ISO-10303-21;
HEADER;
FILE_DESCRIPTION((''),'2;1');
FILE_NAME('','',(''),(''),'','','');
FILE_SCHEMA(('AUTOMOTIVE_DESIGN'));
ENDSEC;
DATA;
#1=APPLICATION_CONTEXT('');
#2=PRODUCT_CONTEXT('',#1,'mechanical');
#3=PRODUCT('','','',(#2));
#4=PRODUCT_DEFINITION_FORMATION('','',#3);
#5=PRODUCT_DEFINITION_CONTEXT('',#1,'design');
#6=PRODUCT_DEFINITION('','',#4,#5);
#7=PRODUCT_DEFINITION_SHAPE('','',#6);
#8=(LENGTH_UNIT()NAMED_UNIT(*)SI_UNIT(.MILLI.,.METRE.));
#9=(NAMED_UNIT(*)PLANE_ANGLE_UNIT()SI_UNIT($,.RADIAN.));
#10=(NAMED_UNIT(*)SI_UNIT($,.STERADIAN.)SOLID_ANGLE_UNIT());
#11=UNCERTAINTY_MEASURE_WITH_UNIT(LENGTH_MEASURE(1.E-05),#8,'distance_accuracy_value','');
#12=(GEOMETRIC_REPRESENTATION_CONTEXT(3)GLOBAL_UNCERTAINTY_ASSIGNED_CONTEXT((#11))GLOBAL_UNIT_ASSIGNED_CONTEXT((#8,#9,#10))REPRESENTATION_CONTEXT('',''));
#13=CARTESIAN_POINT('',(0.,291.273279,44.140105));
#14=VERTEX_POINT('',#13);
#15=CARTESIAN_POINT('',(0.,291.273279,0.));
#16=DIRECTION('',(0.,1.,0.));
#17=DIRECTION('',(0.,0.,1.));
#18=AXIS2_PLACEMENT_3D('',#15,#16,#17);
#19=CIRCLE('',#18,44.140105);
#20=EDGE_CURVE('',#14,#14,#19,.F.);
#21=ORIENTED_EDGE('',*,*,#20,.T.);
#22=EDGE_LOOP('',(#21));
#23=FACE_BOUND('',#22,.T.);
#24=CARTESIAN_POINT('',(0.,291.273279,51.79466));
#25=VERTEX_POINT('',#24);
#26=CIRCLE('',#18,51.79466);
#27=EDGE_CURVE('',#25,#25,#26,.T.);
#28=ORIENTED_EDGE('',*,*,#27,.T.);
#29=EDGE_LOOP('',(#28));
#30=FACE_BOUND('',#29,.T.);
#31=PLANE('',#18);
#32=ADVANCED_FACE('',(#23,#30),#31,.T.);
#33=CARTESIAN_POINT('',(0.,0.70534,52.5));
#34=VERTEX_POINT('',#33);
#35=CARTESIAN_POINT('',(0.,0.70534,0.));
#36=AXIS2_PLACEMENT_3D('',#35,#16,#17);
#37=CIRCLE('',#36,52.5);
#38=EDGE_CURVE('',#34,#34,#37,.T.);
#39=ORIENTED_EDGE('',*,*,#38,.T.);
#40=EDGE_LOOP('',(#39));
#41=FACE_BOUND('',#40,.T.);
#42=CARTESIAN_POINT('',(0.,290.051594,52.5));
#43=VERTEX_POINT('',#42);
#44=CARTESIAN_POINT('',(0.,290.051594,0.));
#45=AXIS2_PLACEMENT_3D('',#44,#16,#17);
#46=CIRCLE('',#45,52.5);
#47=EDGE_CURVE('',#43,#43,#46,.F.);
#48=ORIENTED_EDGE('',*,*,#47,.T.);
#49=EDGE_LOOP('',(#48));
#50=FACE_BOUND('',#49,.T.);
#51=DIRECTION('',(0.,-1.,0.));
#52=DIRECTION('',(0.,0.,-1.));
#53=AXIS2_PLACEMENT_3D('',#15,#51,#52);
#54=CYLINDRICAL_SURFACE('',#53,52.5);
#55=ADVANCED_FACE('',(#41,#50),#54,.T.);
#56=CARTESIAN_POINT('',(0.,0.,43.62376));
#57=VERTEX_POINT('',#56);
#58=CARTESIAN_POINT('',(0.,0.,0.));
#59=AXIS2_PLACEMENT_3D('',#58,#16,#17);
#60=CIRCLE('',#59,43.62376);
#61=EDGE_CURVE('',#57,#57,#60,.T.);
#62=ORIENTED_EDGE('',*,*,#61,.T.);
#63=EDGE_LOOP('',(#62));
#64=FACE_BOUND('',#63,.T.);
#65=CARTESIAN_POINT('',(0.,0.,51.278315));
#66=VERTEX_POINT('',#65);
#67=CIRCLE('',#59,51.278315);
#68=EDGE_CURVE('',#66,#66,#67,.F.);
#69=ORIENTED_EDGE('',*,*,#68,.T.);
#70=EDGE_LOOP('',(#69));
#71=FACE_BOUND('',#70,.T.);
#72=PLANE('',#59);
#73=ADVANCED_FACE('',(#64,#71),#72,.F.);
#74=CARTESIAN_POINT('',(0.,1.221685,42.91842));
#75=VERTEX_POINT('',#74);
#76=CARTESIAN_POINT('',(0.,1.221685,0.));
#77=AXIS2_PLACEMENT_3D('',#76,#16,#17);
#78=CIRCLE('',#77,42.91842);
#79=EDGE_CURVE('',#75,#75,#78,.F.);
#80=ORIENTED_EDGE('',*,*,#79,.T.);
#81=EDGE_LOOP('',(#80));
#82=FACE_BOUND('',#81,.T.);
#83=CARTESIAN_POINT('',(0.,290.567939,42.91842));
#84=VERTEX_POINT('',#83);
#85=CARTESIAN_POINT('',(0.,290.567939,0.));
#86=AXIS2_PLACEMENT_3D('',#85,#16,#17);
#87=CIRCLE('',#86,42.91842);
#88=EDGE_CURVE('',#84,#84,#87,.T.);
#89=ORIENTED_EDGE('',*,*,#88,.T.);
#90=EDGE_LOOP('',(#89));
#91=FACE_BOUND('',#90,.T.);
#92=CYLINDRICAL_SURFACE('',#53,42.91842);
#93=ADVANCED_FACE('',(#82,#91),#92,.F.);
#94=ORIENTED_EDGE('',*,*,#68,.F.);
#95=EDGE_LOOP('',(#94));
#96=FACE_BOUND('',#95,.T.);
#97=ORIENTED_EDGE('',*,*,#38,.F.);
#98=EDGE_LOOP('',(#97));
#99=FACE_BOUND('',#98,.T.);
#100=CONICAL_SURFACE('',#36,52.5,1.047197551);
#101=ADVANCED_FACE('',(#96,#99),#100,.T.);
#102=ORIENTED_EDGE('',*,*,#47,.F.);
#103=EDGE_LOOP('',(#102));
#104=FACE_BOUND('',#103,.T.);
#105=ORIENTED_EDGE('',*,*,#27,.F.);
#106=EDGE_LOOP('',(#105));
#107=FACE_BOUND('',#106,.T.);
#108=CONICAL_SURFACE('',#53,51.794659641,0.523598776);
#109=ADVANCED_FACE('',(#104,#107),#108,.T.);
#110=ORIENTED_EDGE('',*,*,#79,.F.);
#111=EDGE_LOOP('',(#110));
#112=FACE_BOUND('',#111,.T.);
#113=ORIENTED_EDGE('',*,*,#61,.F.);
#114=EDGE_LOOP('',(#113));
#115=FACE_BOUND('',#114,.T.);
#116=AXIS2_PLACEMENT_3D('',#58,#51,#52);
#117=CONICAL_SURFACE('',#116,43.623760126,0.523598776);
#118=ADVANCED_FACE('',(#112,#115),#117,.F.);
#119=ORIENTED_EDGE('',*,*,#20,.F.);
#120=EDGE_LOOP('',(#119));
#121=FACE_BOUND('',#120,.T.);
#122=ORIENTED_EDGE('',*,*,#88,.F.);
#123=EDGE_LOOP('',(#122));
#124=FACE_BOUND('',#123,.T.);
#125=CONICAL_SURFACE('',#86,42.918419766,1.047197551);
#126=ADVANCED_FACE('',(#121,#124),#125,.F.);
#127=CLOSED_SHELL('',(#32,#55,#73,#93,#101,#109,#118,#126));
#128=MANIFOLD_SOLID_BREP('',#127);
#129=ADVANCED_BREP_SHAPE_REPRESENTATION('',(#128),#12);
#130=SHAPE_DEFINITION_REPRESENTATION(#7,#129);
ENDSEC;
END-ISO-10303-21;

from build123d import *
from OCP.BRepFilletAPI import BRepFilletAPI_MakeChamfer

# Parameters (mm, degrees)
SKETCH1_R           = 52.5
BOSS_EXTRUDE1_DEPTH = 291.273279311
SKETCH2_R           = 42.918419766
CUT_EXTRUDE1_DEPTH  = 301.587130863
CHAMFER1_SIZE       = 1.221685339
CHAMFER1_SIZE2      = 0.705340359


with BuildPart() as part:
    # Sketch1 → Boss-Extrude1 (new body)
    with BuildSketch(Plane(origin=(0, 0, 0), x_dir=(1, 0, 0), z_dir=(0, 1, 0))):
        Circle(SKETCH1_R)
    extrude(amount=BOSS_EXTRUDE1_DEPTH)

    # Sketch2 → Cut-Extrude1 (cut, through all)
    with BuildSketch(Plane(origin=(0, 0, 0), x_dir=(1, 0, 0), z_dir=(0, 1, 0))):
        Circle(SKETCH2_R)
    extrude(amount=CUT_EXTRUDE1_DEPTH, mode=Mode.SUBTRACT)

    # Chamfer1: one chamfer whose edges measure the first distance from different faces: ONE call of the kernel's chamfer builder (chamfer() names one face for all edges)
    chamfer1_edges_1 = [part.edges().sort_by_distance(p)[0] for p in [
        (-42.918419766, 291.273279311, 0),
    ]]
    chamfer1_side_1 = [part.faces().sort_by_distance(p)[0] for p in [
        (-51.01507576, 291.273279311, 0),
    ]]
    chamfer1_edges_2 = [part.edges().sort_by_distance(p)[0] for p in [
        (-42.918419766, 0, 0),
    ]]
    chamfer1_side_2 = [part.faces().sort_by_distance(p)[0] for p in [
        (-42.918419766, 145.636639655, 0),
    ]]
    chamfer1_edges_3 = [part.edges().sort_by_distance(p)[0] for p in [
        (-52.5, 0, 0),
    ]]
    chamfer1_side_3 = [part.faces().sort_by_distance(p)[0] for p in [
        (-51.01507576, 0, 0),
    ]]
    chamfer1_edges_4 = [part.edges().sort_by_distance(p)[0] for p in [
        (-52.5, 291.273279311, 0),
    ]]
    chamfer1_side_4 = [part.faces().sort_by_distance(p)[0] for p in [
        (-52.5, 145.636639655, 0),
    ]]
    chamfer1 = BRepFilletAPI_MakeChamfer(part.part.solid().wrapped)
    for e in chamfer1_edges_1:
        chamfer1.Add(CHAMFER1_SIZE, CHAMFER1_SIZE2, e.wrapped, chamfer1_side_1[0].wrapped)  # the first distance lies on this face
    for e in chamfer1_edges_2:
        chamfer1.Add(CHAMFER1_SIZE, CHAMFER1_SIZE2, e.wrapped, chamfer1_side_2[0].wrapped)  # the first distance lies on this face
    for e in chamfer1_edges_3:
        chamfer1.Add(CHAMFER1_SIZE, CHAMFER1_SIZE2, e.wrapped, chamfer1_side_3[0].wrapped)  # the first distance lies on this face
    for e in chamfer1_edges_4:
        chamfer1.Add(CHAMFER1_SIZE, CHAMFER1_SIZE2, e.wrapped, chamfer1_side_4[0].wrapped)  # the first distance lies on this face
    add(Compound.cast(chamfer1.Shape()), mode=Mode.REPLACE)


solid = part.part
